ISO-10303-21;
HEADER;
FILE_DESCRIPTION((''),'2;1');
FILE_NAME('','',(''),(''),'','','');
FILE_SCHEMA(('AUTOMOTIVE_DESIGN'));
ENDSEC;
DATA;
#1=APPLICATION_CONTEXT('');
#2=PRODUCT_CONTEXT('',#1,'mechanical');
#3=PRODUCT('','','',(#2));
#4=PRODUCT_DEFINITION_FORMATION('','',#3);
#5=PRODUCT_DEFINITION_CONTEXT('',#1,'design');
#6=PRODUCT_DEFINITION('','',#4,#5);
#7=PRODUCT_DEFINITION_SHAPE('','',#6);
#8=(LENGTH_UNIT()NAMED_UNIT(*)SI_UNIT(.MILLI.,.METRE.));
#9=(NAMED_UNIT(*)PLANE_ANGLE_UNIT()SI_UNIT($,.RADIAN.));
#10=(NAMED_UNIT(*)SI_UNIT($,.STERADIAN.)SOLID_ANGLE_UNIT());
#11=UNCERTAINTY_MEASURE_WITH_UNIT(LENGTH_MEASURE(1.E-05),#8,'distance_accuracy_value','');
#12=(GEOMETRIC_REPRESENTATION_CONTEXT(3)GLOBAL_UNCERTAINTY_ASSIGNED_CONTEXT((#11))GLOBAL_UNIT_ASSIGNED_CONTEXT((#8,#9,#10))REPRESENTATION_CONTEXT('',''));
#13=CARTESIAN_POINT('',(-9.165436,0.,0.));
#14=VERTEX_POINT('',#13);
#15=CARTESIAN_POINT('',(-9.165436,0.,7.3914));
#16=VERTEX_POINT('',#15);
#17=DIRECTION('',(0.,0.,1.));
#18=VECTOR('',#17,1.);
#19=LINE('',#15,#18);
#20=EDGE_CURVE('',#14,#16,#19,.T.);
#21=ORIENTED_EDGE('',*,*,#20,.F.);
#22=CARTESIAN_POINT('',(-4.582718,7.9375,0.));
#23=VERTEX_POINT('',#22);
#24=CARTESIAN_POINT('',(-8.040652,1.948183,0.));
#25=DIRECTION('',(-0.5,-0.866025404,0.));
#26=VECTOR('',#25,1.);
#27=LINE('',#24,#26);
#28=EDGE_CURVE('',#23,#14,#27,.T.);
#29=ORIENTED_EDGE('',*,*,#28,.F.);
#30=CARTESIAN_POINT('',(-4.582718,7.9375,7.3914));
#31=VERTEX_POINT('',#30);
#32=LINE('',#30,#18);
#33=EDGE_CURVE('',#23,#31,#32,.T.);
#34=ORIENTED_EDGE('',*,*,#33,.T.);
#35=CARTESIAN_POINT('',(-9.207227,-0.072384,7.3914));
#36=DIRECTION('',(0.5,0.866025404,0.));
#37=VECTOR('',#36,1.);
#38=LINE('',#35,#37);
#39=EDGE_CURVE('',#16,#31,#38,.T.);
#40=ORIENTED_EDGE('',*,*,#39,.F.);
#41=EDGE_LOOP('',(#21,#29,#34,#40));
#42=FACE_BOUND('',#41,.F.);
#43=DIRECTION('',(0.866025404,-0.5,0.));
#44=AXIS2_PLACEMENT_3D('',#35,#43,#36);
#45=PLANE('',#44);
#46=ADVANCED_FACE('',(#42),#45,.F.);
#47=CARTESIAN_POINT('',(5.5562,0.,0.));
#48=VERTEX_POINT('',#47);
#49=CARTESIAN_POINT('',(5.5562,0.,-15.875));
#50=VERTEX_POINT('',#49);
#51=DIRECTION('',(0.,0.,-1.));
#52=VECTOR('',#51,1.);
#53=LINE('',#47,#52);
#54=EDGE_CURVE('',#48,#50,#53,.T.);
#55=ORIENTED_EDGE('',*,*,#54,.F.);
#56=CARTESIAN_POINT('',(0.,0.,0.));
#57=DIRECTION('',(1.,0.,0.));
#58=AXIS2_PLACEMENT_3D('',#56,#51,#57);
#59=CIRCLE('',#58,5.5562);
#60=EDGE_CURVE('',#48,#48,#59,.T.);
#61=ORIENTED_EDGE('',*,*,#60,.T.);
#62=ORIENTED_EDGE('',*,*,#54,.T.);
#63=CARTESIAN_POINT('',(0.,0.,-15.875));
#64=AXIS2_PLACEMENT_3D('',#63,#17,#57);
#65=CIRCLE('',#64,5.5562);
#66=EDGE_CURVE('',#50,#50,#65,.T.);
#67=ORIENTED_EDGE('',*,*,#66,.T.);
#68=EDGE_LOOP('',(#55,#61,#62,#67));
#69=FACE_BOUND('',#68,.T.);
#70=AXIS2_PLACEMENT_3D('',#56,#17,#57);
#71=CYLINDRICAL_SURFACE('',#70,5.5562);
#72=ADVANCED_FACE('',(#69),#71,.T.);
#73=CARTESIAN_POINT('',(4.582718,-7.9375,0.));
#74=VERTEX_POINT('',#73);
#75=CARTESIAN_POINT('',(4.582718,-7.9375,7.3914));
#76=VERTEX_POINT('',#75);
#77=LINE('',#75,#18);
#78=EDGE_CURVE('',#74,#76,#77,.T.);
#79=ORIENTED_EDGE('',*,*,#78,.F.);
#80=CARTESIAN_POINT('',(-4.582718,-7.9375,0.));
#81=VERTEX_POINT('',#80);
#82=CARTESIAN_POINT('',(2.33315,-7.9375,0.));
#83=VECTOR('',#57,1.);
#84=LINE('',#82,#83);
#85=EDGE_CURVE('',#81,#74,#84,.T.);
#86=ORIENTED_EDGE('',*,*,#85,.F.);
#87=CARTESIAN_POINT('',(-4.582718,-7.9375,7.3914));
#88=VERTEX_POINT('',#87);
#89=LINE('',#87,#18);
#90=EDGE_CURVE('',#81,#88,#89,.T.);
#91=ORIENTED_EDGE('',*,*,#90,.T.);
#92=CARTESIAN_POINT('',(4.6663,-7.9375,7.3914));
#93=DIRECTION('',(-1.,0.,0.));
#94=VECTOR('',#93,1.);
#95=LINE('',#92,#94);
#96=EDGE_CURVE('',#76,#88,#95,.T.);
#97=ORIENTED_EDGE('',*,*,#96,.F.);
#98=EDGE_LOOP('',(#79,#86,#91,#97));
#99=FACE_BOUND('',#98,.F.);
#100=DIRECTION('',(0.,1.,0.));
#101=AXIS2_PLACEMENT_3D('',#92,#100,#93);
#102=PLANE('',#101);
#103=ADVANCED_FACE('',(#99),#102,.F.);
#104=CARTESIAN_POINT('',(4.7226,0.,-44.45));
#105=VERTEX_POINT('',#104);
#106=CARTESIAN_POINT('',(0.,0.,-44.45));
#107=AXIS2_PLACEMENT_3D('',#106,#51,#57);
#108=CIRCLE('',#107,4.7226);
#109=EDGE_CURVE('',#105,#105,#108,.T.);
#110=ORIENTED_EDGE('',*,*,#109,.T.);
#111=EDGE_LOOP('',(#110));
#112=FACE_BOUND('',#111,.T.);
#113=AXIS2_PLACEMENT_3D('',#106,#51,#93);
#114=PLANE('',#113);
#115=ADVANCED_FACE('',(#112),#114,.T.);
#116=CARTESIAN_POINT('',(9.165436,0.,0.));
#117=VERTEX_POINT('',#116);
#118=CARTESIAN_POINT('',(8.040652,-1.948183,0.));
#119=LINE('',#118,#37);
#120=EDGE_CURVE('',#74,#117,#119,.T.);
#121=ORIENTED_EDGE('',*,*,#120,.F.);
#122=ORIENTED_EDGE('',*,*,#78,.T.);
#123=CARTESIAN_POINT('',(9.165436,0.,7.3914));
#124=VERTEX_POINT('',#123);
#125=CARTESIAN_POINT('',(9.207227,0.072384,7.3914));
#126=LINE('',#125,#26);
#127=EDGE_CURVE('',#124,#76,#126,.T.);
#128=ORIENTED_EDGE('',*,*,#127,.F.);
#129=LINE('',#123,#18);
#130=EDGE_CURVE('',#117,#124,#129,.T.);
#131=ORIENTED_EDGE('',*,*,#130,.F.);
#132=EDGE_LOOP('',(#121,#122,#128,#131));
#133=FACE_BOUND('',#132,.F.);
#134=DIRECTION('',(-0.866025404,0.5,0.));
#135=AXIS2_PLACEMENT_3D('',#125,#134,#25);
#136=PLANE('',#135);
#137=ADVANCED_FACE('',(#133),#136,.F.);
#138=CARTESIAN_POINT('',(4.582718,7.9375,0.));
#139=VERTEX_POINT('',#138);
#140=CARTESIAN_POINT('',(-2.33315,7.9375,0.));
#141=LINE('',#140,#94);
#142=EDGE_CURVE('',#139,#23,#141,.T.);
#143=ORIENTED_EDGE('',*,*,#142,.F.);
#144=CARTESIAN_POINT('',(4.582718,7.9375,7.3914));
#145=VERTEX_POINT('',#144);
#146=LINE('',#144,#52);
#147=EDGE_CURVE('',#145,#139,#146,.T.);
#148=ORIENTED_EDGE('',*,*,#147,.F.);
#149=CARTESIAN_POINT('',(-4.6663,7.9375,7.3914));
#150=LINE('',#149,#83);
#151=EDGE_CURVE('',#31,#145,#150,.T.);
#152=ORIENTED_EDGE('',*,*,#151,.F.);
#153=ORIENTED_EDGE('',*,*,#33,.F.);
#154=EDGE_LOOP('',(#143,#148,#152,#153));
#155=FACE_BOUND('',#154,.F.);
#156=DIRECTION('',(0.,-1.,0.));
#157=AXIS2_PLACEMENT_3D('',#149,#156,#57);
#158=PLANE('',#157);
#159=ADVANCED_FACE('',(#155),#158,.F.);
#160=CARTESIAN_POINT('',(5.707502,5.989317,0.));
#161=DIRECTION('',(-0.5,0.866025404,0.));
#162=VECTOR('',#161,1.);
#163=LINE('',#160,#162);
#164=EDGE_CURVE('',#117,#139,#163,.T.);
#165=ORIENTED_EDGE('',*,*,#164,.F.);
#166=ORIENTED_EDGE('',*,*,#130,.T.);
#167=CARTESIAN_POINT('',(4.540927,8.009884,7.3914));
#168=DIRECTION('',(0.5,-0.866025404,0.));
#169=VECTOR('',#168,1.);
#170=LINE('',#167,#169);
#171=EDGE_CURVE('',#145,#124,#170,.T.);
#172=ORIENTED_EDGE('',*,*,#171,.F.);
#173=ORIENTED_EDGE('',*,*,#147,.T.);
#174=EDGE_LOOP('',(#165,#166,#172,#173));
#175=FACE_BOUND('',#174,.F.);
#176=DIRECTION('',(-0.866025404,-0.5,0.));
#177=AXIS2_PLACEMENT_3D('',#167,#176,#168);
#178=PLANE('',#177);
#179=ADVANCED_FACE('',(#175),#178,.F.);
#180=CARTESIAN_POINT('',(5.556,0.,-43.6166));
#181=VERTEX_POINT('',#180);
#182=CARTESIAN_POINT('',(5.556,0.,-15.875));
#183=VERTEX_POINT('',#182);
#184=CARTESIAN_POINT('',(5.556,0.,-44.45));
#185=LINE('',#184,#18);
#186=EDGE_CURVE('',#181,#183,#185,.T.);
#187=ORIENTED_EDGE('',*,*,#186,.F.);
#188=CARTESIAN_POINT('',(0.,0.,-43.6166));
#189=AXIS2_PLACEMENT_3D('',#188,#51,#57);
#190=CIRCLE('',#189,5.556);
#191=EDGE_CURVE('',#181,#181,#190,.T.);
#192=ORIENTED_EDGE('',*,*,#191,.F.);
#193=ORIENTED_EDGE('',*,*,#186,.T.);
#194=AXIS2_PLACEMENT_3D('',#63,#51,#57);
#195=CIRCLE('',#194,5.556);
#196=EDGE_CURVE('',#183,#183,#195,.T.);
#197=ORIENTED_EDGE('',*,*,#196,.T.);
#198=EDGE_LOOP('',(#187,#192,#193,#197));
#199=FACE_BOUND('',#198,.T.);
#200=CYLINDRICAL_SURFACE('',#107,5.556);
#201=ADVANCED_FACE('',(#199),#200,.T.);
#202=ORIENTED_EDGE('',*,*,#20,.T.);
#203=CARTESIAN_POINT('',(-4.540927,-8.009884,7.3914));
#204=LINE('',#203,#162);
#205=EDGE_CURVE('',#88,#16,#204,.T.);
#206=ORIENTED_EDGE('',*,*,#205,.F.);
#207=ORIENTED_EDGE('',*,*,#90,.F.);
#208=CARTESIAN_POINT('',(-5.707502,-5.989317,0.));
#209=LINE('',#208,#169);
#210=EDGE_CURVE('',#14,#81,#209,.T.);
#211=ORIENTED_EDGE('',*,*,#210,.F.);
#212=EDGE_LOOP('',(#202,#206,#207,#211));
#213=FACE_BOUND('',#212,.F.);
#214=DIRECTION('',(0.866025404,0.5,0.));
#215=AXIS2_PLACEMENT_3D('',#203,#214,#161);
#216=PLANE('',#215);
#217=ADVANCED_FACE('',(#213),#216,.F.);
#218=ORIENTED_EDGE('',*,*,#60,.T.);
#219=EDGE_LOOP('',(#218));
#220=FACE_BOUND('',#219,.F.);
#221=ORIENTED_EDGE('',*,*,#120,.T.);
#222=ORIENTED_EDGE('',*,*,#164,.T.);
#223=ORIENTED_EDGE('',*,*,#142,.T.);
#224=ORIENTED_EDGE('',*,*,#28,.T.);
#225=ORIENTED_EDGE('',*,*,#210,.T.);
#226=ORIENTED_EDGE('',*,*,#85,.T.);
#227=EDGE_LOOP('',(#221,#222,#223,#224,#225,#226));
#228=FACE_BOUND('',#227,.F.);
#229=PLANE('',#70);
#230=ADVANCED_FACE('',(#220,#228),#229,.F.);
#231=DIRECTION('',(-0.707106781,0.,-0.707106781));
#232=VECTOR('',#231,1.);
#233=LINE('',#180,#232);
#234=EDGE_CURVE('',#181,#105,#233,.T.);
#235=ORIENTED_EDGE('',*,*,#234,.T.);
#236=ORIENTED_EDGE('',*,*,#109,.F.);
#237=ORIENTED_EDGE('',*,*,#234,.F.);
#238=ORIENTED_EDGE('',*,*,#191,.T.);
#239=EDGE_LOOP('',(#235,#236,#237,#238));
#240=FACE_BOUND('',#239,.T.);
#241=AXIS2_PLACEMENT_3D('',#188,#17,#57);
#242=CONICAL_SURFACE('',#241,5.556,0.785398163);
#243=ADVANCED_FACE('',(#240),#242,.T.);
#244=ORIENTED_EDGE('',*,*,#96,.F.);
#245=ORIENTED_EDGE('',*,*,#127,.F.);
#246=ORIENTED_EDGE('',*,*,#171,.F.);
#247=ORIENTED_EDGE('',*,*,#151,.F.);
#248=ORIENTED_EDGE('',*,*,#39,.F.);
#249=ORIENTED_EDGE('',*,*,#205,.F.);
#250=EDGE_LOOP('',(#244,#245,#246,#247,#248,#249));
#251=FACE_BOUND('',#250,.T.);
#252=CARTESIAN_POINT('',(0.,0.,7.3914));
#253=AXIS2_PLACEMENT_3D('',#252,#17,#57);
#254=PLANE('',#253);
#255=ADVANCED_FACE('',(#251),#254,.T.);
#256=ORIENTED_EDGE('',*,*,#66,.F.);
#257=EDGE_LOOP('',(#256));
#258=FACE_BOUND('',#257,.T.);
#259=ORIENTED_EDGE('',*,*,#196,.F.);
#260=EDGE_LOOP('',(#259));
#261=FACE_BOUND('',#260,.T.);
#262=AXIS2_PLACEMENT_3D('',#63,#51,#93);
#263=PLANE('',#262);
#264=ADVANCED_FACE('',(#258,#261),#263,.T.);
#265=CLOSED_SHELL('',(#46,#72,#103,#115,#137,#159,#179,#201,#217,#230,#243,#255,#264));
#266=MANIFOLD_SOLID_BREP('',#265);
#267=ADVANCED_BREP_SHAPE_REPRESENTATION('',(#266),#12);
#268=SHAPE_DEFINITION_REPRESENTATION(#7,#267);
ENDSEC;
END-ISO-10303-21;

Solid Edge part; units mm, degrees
sketch "Sketch1" plane through (0, 0, 0) normal (0, 0, 1) x (1, 0, 0)
  circle A0 centre (0, 0) radius 9.2075
  dimension "D1" = 18.415
extrude "Protrusion1" add sketch "Sketch1" along normal blind 7.3914
sketch "Sketch2" plane through (0, 0, 0) normal (0, 0, -1) x (1, 0, 0)
  circle A0 centre (0, 0) radius 5.5562
extrude "Protrusion2" add sketch "Sketch2" along normal blind 44.45
sketch "Sketch3" plane through (0, 0, -44.45) normal (0, 0, -1) x (1, 0, 0)
  circle A0 centre (0, 0) radius 5.556
extrude "Cutout1" cut sketch "Sketch3" against normal blind 28.575 flip side to cut
chamfer "Chamfer_1" distance 0.8334 angle 45 1 edges at (-5.556, 0, -44.45)
sketch "Sketch4" plane through (0, 0, 7.3914) normal (0, 0, 1) x (1, 0, 0)
  line L0 (-4.6663, 7.9375) -> (4.6663, 7.9375)
  dimension "D1" = 15.875
extrude "Cutout2" cut sketch "Sketch4" against normal up to next material side at (0, 7.9875, 7.3914)
pattern_circular "Pattern1" count 6 over 360 about axis through (0, 0, 7.3914) along (0, 0, 1) of "Cutout2"
properties part number "24102743"
